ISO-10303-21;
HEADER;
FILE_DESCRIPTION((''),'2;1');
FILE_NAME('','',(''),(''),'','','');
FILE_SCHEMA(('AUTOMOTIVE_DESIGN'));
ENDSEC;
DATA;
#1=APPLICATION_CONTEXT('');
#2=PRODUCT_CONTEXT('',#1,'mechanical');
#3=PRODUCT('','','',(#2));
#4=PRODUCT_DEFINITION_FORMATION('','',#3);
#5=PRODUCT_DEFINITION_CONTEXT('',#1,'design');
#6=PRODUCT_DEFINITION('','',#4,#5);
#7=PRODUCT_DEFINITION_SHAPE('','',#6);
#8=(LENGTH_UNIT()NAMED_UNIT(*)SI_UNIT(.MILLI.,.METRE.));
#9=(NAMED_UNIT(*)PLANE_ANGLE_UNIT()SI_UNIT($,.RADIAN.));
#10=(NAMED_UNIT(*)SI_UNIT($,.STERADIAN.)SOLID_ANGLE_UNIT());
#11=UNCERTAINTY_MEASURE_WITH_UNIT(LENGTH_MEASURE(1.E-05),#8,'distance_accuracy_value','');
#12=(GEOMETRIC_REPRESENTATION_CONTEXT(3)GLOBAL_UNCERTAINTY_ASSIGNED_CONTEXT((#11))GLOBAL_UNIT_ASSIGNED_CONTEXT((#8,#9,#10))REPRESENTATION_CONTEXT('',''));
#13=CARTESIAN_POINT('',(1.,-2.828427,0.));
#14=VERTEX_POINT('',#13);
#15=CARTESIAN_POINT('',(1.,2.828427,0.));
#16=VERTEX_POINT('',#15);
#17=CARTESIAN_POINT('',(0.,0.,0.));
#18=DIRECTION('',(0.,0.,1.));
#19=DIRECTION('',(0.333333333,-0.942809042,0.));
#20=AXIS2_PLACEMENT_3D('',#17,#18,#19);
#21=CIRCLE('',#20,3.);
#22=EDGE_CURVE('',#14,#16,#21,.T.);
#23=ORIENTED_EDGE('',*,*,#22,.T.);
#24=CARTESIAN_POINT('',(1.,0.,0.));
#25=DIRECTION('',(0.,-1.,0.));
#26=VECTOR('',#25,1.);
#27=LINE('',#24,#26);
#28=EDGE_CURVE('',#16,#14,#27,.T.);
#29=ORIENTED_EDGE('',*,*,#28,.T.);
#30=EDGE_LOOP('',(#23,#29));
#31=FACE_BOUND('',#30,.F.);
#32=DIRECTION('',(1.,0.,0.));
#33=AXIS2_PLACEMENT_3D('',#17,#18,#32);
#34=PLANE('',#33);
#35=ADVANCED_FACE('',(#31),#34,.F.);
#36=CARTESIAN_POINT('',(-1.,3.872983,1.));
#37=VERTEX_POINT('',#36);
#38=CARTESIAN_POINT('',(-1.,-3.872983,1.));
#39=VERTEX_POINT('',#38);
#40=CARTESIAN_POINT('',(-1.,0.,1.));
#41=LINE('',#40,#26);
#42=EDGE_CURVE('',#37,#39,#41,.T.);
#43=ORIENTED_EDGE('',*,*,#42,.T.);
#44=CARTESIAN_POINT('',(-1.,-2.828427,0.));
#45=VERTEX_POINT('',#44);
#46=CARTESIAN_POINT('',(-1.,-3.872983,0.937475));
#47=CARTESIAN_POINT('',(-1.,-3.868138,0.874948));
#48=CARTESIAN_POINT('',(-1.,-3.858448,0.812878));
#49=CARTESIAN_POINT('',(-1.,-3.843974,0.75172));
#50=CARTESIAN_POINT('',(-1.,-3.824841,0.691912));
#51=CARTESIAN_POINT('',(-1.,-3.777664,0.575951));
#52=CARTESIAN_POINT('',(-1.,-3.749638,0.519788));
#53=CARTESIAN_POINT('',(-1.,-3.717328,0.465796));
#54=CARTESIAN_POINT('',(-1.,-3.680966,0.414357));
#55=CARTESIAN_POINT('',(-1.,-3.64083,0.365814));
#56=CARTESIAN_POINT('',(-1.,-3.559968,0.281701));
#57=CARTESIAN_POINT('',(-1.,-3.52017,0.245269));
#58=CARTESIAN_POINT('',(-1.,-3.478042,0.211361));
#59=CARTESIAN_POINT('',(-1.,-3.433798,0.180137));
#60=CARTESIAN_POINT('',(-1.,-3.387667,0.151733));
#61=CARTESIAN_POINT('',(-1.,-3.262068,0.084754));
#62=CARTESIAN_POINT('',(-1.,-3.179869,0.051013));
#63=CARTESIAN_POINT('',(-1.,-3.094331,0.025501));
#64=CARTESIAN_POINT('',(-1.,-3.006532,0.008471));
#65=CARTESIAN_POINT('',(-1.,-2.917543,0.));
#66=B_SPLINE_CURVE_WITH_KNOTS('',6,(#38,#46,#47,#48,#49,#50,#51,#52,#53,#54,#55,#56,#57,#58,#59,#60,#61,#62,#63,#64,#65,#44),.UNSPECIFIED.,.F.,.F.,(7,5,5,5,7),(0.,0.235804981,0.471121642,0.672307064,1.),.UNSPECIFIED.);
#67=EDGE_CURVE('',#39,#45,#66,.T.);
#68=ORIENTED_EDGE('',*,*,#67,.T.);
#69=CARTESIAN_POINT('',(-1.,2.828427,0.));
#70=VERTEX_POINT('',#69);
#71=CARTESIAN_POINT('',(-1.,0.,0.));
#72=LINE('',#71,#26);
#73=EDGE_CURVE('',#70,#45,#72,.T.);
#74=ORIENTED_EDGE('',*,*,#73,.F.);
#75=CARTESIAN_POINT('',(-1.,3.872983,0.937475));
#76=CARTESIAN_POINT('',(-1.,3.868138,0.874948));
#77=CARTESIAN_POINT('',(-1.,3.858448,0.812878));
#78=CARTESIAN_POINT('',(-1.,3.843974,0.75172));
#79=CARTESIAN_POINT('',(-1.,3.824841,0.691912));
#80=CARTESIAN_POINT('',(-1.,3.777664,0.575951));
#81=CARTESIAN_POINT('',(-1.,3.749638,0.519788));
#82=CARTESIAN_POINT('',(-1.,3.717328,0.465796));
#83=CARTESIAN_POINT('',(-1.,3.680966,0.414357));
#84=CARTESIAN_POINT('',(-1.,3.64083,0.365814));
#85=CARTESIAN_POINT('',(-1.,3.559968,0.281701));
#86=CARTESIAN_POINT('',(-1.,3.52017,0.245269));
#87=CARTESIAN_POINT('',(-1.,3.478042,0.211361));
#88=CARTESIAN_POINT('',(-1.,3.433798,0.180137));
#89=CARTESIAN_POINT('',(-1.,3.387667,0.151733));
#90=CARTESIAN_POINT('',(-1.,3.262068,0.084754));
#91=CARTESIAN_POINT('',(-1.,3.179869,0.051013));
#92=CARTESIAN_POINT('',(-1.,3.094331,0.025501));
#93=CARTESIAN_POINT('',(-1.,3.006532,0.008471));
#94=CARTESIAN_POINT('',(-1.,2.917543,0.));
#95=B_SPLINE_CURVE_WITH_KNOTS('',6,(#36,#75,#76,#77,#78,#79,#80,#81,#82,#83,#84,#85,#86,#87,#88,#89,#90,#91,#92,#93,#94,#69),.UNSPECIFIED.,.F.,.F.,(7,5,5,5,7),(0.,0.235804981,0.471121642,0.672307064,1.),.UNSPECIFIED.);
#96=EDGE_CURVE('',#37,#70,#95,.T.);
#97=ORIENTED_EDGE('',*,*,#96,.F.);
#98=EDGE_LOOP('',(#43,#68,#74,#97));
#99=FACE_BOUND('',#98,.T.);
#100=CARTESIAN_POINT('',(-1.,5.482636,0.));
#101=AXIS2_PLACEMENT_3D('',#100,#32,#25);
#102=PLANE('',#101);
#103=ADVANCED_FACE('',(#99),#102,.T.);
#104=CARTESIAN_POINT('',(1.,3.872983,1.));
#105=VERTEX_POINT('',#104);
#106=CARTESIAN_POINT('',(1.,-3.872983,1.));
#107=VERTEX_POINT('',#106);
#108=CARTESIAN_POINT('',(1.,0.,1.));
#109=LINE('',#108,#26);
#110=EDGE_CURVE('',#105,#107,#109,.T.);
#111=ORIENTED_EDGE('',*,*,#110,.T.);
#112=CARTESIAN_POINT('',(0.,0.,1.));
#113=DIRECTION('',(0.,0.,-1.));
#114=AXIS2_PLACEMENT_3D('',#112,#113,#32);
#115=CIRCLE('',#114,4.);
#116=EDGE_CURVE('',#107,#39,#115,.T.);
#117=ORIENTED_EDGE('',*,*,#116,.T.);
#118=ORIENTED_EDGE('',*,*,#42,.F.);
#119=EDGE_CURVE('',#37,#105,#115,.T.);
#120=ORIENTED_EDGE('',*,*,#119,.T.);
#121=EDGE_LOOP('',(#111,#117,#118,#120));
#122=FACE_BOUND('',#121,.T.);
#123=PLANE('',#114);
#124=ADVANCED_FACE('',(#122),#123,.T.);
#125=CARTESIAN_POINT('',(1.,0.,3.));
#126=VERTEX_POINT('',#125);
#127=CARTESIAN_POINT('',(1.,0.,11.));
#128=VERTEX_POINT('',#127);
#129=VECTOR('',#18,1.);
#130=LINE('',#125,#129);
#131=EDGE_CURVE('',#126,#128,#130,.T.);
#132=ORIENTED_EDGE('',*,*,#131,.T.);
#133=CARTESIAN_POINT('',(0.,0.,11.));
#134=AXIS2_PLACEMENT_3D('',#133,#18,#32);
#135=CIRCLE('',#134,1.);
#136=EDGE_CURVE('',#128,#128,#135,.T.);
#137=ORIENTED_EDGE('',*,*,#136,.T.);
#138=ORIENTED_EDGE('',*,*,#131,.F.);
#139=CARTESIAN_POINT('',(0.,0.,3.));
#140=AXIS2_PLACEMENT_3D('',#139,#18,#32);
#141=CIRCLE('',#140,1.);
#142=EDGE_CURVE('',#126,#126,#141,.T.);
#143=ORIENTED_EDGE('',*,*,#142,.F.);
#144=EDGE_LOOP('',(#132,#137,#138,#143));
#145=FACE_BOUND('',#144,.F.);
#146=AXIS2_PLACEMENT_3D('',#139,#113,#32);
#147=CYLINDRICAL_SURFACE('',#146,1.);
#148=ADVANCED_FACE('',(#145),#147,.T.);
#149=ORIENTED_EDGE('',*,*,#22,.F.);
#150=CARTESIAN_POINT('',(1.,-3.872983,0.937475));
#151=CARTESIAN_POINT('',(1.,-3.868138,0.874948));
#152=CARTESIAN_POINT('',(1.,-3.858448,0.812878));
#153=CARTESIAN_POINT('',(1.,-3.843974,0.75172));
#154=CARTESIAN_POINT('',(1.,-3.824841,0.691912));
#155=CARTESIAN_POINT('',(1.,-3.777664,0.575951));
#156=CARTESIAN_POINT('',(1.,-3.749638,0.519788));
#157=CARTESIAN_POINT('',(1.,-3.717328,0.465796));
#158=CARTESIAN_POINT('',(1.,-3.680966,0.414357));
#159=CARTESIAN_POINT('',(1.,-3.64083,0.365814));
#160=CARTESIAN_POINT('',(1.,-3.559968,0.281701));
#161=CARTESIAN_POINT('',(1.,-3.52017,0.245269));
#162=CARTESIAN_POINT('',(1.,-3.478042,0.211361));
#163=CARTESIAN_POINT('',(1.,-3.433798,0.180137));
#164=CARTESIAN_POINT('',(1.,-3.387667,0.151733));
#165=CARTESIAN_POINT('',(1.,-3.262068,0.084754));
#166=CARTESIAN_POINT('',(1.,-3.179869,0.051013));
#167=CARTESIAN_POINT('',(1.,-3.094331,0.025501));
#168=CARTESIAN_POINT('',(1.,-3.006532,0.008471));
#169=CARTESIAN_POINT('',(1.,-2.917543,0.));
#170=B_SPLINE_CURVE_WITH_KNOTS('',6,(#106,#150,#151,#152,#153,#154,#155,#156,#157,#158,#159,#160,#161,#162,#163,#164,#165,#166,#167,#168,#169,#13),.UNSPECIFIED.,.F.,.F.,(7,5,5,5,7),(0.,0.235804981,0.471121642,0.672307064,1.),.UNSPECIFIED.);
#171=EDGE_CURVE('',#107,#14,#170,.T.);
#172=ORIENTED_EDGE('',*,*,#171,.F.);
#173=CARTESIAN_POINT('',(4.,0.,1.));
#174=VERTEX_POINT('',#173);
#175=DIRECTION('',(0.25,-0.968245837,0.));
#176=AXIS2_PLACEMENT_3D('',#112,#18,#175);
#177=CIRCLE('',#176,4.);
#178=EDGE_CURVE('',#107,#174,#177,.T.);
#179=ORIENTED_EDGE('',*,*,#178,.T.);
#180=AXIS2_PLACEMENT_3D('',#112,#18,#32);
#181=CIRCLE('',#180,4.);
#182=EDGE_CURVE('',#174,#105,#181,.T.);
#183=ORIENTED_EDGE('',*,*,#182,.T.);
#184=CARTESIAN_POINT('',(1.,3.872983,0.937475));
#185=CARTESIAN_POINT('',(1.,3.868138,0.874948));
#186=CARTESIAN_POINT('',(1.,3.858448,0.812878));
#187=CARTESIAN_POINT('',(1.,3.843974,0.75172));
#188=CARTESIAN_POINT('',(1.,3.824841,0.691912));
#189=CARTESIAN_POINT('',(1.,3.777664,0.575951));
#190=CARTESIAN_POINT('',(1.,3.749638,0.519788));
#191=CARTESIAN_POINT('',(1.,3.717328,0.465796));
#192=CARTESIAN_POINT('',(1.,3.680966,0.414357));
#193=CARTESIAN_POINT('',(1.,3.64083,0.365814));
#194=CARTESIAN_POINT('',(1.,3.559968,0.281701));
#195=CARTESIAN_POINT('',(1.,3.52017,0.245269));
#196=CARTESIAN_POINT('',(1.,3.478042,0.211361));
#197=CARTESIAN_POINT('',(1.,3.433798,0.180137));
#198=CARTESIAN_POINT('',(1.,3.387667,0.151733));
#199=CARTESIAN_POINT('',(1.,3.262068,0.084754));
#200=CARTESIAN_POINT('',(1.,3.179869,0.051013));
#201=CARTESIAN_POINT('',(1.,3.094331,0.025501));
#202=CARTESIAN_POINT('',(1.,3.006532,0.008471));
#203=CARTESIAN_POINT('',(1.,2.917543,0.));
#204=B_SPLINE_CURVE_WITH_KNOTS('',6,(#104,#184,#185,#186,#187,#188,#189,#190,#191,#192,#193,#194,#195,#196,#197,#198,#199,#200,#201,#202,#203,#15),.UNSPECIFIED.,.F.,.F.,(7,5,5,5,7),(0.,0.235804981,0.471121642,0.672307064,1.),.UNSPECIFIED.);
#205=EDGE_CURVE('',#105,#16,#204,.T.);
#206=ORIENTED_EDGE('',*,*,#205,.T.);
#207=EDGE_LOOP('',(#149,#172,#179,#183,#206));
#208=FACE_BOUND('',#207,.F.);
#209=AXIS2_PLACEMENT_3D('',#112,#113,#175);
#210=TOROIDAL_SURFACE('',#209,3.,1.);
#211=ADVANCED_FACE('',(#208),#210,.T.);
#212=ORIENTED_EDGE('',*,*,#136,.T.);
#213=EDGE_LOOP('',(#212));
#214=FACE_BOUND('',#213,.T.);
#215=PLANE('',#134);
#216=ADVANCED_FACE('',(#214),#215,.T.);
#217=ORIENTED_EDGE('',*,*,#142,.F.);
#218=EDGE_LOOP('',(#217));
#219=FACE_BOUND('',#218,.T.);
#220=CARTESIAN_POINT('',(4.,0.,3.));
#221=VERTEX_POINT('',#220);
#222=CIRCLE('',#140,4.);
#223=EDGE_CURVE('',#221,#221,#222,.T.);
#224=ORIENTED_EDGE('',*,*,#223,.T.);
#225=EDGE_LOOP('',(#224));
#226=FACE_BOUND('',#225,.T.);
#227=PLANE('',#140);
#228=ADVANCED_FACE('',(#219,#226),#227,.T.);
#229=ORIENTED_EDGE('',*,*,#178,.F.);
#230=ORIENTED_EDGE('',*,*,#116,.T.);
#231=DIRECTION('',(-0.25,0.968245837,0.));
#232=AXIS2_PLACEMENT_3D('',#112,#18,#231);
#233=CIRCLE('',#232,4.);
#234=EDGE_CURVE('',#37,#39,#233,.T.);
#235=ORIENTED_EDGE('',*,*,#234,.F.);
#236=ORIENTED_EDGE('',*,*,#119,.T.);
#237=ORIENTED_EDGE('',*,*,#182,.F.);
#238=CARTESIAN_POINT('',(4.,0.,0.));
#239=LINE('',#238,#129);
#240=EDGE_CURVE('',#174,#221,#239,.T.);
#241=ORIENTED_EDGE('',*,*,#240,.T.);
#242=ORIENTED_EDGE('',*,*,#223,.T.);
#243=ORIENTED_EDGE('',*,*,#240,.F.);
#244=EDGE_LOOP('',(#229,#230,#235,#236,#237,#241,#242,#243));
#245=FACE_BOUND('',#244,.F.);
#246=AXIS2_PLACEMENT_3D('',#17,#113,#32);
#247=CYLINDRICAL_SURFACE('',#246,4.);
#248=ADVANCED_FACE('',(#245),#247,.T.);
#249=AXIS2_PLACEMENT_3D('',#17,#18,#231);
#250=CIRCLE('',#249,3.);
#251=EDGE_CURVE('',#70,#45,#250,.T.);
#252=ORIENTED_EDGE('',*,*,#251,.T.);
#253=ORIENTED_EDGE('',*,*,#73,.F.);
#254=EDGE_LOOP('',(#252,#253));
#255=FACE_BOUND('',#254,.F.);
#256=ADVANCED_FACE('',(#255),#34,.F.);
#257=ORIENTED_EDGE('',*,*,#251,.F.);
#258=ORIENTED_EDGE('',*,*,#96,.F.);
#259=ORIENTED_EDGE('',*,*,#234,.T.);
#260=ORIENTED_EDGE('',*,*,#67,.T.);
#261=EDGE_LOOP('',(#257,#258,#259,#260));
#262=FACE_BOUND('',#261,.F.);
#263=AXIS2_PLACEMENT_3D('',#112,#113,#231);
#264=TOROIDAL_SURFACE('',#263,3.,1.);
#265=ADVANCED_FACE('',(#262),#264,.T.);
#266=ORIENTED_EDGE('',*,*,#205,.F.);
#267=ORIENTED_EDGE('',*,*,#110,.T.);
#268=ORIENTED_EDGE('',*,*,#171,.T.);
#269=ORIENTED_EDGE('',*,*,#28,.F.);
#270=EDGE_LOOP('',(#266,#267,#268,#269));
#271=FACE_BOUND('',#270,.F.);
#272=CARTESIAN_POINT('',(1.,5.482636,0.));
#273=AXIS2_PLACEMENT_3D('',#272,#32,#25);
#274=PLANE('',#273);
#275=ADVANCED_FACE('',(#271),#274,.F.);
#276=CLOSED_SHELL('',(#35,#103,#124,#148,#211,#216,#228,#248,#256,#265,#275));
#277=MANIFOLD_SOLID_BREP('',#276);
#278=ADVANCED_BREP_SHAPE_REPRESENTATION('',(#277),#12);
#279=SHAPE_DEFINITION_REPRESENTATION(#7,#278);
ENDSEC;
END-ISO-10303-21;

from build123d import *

# Parameters (mm, degrees)
F0_R     = 4
F1_DEPTH = 3
F2_R     = 1
F3_DEPTH = 8
F4_W     = 2
F4_H     = 10.9652710235
F5_DEPTH = 1
F6_R     = 1


with BuildPart() as f1:
    # F0 (on Top) → F1 (new body)
    with BuildSketch(Plane.XY):
        Circle(F0_R)
    extrude(amount=F1_DEPTH)

    # F2 (on face) → F3 (join)
    with BuildSketch(Plane.XY.offset(3)):
        Circle(F2_R)
    extrude(amount=F3_DEPTH)

    # F4 (on face) → F5 (cut)
    with BuildSketch(Plane(origin=(0, 0, 0), x_dir=(1, 0, 0), z_dir=(0, 0, -1))):
        Rectangle(F4_W, F4_H)
    extrude(amount=-F5_DEPTH, mode=Mode.SUBTRACT)

    # F6
    f6_edges = [f1.edges().sort_by_distance(p)[0] for p in [
        (-4, 0, 0),
        (3.162278, 2.44949, 0),
        (3.162278, -2.44949, 0),
    ]]
    fillet(f6_edges, radius=F6_R)


solid = f1.part
